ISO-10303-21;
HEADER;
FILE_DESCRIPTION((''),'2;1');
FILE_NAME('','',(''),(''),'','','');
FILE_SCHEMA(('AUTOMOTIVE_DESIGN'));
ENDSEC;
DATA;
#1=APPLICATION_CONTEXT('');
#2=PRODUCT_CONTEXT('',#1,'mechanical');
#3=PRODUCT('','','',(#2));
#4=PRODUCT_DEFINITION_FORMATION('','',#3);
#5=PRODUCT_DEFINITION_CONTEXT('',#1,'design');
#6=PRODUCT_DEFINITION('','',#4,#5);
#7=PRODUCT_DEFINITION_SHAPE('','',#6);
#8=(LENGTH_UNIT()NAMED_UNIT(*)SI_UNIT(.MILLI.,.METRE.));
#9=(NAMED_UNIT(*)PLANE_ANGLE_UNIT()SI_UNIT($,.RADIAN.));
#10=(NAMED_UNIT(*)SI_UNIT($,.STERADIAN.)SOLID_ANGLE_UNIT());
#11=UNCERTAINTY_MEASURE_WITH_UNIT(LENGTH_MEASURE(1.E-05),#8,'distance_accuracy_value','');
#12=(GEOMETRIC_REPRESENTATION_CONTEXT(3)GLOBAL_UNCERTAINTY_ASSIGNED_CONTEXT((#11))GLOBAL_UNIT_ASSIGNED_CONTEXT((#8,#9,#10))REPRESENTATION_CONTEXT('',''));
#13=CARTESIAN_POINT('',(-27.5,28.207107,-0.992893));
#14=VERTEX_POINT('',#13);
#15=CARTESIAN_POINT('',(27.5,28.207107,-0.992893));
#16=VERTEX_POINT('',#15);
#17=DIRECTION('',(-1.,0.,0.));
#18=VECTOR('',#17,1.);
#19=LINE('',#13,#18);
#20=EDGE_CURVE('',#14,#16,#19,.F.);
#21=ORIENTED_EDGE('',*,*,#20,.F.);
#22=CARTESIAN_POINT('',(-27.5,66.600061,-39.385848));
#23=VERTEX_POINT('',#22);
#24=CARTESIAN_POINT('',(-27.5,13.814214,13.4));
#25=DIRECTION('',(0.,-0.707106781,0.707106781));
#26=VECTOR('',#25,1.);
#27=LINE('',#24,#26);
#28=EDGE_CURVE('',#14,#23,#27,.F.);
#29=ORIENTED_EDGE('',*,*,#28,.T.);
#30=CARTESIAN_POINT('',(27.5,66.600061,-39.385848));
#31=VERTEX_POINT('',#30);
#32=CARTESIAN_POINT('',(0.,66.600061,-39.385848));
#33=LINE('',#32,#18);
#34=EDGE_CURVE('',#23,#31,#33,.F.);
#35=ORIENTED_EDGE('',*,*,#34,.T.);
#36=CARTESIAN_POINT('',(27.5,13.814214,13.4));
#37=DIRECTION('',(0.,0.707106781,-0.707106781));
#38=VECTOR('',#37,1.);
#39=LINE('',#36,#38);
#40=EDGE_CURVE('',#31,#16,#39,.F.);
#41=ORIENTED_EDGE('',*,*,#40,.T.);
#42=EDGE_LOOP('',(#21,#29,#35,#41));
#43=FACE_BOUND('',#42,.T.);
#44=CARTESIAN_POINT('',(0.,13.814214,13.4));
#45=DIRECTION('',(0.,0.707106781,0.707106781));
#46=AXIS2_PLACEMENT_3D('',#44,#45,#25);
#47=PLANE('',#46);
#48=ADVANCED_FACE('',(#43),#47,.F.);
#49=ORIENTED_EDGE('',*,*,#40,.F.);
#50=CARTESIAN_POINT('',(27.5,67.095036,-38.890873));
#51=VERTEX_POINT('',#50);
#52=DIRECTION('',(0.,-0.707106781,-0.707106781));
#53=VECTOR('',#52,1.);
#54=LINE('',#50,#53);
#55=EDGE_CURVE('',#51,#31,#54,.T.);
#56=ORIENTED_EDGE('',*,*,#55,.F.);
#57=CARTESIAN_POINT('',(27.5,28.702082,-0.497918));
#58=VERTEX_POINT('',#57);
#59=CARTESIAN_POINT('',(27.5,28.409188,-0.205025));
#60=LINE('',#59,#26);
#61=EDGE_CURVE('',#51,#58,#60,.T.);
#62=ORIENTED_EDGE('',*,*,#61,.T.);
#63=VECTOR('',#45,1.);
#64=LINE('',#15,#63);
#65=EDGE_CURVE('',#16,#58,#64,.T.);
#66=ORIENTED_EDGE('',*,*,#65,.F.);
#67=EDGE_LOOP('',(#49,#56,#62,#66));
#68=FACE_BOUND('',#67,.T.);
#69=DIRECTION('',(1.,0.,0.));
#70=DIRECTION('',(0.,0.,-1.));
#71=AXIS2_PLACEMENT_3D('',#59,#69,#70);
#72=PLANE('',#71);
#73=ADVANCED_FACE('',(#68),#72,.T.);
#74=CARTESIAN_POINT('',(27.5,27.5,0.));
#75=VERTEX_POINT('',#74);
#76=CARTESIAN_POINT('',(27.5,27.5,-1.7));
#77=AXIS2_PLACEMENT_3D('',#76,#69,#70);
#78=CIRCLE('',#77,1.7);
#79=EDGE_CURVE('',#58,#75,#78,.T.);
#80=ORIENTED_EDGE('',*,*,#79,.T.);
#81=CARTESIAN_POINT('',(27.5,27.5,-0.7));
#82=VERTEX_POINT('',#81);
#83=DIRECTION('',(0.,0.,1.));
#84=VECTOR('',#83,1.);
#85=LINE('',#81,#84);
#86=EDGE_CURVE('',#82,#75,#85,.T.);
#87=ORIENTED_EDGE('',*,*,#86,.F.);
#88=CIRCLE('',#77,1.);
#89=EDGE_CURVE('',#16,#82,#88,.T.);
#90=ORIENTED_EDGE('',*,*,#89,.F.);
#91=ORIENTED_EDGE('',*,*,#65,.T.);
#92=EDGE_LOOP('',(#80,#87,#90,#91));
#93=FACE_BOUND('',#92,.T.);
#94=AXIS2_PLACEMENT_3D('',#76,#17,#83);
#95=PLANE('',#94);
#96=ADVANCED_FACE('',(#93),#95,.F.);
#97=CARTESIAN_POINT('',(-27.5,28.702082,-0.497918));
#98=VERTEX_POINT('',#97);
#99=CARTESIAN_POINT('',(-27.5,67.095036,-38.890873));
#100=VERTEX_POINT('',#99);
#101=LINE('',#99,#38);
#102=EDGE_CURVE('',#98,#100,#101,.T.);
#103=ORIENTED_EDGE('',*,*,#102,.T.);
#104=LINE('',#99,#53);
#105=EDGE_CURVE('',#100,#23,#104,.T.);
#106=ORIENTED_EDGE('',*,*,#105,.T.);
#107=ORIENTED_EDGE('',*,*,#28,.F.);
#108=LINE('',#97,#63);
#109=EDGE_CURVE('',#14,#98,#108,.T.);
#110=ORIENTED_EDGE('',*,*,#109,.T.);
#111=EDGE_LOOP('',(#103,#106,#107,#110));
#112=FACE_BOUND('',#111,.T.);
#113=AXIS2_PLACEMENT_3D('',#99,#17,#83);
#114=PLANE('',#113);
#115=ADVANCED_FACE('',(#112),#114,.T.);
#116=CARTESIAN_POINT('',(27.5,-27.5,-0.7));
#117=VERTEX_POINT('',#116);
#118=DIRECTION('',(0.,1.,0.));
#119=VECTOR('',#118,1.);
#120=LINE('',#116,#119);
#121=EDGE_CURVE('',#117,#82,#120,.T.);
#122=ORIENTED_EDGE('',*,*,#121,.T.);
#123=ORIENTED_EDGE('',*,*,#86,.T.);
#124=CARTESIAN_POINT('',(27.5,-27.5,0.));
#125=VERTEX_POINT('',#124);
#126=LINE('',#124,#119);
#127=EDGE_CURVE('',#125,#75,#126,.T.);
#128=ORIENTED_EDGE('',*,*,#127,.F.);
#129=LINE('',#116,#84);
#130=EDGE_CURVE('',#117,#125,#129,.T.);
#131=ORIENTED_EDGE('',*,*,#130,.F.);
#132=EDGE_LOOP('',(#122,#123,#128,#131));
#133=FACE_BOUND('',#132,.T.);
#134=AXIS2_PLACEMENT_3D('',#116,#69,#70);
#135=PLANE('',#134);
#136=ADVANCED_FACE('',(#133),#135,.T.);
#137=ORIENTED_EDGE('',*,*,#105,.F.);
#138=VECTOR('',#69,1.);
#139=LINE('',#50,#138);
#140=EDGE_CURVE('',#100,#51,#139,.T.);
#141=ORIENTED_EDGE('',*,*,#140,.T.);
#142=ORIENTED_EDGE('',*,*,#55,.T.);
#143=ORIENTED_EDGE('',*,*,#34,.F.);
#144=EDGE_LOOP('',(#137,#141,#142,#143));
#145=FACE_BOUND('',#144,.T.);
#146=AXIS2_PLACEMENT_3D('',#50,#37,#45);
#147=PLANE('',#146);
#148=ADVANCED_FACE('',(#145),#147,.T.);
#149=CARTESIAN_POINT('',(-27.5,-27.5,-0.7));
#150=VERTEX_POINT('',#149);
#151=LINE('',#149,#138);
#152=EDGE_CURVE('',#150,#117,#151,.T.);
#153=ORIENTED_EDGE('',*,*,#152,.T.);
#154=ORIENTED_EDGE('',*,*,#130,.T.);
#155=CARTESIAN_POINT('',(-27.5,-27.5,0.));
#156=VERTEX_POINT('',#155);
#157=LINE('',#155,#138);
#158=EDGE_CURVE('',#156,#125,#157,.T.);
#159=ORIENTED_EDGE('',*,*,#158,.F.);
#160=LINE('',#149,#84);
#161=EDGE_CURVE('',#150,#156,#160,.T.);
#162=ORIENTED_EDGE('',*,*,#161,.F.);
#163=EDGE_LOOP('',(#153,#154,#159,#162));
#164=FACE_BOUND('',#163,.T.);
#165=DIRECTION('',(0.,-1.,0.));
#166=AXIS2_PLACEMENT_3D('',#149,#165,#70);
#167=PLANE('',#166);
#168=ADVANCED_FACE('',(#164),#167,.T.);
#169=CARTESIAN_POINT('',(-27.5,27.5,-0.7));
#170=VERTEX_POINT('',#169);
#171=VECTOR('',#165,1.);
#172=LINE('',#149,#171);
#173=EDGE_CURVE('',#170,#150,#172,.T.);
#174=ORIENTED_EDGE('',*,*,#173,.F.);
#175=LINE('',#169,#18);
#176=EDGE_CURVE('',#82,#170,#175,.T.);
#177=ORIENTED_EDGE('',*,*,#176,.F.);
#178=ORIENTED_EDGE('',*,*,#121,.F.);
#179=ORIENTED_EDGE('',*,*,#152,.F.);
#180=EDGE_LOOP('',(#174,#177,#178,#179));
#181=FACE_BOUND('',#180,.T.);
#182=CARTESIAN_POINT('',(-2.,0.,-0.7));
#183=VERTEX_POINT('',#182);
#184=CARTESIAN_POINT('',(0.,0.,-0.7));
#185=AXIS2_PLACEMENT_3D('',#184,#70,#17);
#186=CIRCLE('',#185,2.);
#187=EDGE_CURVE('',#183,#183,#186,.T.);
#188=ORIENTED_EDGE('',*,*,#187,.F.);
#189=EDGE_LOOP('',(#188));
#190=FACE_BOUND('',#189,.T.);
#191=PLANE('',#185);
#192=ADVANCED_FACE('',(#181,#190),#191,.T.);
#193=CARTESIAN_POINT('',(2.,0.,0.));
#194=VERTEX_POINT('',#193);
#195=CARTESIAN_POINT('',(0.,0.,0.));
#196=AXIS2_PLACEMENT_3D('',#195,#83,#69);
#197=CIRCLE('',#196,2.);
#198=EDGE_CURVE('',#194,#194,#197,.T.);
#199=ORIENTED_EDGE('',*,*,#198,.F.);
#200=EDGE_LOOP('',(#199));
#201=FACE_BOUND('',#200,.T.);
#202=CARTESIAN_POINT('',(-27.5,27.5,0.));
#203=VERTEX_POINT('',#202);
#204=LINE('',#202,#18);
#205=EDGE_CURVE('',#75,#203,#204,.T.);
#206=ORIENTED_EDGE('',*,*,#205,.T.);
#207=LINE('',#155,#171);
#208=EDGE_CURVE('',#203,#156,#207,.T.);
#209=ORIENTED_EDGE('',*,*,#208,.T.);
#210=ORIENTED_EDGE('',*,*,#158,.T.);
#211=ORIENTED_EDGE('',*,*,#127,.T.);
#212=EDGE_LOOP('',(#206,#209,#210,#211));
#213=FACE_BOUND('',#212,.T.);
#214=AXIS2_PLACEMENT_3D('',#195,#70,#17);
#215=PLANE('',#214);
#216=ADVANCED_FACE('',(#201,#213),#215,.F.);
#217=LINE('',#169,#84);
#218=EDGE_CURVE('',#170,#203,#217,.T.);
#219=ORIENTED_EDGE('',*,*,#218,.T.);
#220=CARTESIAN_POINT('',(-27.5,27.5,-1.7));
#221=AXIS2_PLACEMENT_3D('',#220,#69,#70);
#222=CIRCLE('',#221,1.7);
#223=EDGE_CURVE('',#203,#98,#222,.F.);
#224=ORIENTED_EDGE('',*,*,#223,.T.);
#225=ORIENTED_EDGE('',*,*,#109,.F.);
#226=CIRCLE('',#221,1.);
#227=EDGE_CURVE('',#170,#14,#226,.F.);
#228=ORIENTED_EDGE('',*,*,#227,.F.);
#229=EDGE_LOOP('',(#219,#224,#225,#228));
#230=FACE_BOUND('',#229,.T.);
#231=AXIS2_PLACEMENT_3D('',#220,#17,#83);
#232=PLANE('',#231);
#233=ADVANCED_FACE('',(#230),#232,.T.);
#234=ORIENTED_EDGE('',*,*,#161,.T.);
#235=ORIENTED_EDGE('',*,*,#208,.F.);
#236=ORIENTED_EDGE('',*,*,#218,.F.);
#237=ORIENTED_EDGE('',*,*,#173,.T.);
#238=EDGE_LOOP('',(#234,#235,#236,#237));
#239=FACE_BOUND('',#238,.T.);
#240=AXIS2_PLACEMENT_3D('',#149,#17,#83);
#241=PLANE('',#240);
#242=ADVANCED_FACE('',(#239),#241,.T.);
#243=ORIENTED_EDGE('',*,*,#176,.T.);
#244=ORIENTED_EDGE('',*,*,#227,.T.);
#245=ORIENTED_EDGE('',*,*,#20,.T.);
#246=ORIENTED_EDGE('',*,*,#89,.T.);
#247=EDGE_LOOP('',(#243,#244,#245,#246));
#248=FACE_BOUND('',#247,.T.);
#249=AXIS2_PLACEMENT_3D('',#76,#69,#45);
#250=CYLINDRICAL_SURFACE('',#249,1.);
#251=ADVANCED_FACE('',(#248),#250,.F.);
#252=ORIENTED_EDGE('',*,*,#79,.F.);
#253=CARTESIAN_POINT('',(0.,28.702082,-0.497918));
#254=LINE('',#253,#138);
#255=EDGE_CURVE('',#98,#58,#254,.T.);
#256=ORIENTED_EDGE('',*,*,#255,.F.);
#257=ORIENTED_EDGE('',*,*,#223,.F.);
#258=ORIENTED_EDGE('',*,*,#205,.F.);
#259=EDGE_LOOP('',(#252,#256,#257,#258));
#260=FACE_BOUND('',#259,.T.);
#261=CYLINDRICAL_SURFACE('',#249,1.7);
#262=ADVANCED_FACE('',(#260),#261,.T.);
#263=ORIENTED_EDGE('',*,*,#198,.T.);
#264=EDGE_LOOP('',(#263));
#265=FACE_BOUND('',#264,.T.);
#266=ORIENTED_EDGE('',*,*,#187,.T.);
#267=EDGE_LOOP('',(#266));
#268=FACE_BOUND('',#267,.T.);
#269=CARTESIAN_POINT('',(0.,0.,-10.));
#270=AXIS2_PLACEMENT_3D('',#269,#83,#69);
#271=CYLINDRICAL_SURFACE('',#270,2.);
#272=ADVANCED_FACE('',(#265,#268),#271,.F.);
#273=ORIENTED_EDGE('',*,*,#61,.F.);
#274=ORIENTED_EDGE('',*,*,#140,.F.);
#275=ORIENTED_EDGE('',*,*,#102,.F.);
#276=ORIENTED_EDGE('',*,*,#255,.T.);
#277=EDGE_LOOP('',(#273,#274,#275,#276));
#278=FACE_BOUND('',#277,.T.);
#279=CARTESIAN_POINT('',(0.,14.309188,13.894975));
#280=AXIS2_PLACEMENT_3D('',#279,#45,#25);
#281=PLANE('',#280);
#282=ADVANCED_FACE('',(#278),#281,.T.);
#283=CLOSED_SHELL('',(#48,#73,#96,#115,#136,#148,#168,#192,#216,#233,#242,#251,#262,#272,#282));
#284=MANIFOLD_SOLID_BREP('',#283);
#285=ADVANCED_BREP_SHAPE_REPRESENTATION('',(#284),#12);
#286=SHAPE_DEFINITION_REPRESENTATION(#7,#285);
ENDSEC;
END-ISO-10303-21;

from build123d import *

# Parameters (mm, degrees)
SKETCH1_W          = 55
SKETCH1_H          = 55
BASE_FLANGE1_DEPTH = 0.7
EDGE_FLANGE1_DEPTH = 55
SKETCH10_R         = 2
CUT_EXTRUDE1_DEPTH = 10


# Sheet-metal steps are written as plain solids
with BuildPart() as part:
    # Sketch1 → Base-Flange1 (new body)
    with BuildSketch(Plane.XY):
        Rectangle(SKETCH1_W, SKETCH1_H)
    extrude(amount=-BASE_FLANGE1_DEPTH)

    # Edge-Flange1 section (across the edge) → Edge-Flange1 (add)
    with BuildSketch(Plane(origin=(-27.5, 27.914213562, -0.7), x_dir=(0, -0.7071067811865438, -0.7071067811865512), z_dir=(1, 0, 0))):
        with BuildLine():
            Line((-0.7, 0.414213562), (-0.7, 54.710050506))
            Line((-0.7, 54.710050506), (0, 54.710050506))
            Line((0, 54.710050506), (0, 0.414213562))
            ThreePointArc((0, 0.414213562), (0.076120467, 0.03153013), (0.292893219, -0.292893219))
            Line((0.292893219, -0.292893219), (-0.202081528, -0.787867966))
            ThreePointArc((-0.202081528, -0.787867966), (-0.570595205, -0.236348273), (-0.7, 0.414213562))
        make_face()
    extrude(amount=EDGE_FLANGE1_DEPTH)

    # Sketch10 → Cut-Extrude1 (cut)
    with BuildSketch(Plane.XY):
        Circle(SKETCH10_R)
    extrude(amount=-CUT_EXTRUDE1_DEPTH, mode=Mode.SUBTRACT)


solid = part.part
